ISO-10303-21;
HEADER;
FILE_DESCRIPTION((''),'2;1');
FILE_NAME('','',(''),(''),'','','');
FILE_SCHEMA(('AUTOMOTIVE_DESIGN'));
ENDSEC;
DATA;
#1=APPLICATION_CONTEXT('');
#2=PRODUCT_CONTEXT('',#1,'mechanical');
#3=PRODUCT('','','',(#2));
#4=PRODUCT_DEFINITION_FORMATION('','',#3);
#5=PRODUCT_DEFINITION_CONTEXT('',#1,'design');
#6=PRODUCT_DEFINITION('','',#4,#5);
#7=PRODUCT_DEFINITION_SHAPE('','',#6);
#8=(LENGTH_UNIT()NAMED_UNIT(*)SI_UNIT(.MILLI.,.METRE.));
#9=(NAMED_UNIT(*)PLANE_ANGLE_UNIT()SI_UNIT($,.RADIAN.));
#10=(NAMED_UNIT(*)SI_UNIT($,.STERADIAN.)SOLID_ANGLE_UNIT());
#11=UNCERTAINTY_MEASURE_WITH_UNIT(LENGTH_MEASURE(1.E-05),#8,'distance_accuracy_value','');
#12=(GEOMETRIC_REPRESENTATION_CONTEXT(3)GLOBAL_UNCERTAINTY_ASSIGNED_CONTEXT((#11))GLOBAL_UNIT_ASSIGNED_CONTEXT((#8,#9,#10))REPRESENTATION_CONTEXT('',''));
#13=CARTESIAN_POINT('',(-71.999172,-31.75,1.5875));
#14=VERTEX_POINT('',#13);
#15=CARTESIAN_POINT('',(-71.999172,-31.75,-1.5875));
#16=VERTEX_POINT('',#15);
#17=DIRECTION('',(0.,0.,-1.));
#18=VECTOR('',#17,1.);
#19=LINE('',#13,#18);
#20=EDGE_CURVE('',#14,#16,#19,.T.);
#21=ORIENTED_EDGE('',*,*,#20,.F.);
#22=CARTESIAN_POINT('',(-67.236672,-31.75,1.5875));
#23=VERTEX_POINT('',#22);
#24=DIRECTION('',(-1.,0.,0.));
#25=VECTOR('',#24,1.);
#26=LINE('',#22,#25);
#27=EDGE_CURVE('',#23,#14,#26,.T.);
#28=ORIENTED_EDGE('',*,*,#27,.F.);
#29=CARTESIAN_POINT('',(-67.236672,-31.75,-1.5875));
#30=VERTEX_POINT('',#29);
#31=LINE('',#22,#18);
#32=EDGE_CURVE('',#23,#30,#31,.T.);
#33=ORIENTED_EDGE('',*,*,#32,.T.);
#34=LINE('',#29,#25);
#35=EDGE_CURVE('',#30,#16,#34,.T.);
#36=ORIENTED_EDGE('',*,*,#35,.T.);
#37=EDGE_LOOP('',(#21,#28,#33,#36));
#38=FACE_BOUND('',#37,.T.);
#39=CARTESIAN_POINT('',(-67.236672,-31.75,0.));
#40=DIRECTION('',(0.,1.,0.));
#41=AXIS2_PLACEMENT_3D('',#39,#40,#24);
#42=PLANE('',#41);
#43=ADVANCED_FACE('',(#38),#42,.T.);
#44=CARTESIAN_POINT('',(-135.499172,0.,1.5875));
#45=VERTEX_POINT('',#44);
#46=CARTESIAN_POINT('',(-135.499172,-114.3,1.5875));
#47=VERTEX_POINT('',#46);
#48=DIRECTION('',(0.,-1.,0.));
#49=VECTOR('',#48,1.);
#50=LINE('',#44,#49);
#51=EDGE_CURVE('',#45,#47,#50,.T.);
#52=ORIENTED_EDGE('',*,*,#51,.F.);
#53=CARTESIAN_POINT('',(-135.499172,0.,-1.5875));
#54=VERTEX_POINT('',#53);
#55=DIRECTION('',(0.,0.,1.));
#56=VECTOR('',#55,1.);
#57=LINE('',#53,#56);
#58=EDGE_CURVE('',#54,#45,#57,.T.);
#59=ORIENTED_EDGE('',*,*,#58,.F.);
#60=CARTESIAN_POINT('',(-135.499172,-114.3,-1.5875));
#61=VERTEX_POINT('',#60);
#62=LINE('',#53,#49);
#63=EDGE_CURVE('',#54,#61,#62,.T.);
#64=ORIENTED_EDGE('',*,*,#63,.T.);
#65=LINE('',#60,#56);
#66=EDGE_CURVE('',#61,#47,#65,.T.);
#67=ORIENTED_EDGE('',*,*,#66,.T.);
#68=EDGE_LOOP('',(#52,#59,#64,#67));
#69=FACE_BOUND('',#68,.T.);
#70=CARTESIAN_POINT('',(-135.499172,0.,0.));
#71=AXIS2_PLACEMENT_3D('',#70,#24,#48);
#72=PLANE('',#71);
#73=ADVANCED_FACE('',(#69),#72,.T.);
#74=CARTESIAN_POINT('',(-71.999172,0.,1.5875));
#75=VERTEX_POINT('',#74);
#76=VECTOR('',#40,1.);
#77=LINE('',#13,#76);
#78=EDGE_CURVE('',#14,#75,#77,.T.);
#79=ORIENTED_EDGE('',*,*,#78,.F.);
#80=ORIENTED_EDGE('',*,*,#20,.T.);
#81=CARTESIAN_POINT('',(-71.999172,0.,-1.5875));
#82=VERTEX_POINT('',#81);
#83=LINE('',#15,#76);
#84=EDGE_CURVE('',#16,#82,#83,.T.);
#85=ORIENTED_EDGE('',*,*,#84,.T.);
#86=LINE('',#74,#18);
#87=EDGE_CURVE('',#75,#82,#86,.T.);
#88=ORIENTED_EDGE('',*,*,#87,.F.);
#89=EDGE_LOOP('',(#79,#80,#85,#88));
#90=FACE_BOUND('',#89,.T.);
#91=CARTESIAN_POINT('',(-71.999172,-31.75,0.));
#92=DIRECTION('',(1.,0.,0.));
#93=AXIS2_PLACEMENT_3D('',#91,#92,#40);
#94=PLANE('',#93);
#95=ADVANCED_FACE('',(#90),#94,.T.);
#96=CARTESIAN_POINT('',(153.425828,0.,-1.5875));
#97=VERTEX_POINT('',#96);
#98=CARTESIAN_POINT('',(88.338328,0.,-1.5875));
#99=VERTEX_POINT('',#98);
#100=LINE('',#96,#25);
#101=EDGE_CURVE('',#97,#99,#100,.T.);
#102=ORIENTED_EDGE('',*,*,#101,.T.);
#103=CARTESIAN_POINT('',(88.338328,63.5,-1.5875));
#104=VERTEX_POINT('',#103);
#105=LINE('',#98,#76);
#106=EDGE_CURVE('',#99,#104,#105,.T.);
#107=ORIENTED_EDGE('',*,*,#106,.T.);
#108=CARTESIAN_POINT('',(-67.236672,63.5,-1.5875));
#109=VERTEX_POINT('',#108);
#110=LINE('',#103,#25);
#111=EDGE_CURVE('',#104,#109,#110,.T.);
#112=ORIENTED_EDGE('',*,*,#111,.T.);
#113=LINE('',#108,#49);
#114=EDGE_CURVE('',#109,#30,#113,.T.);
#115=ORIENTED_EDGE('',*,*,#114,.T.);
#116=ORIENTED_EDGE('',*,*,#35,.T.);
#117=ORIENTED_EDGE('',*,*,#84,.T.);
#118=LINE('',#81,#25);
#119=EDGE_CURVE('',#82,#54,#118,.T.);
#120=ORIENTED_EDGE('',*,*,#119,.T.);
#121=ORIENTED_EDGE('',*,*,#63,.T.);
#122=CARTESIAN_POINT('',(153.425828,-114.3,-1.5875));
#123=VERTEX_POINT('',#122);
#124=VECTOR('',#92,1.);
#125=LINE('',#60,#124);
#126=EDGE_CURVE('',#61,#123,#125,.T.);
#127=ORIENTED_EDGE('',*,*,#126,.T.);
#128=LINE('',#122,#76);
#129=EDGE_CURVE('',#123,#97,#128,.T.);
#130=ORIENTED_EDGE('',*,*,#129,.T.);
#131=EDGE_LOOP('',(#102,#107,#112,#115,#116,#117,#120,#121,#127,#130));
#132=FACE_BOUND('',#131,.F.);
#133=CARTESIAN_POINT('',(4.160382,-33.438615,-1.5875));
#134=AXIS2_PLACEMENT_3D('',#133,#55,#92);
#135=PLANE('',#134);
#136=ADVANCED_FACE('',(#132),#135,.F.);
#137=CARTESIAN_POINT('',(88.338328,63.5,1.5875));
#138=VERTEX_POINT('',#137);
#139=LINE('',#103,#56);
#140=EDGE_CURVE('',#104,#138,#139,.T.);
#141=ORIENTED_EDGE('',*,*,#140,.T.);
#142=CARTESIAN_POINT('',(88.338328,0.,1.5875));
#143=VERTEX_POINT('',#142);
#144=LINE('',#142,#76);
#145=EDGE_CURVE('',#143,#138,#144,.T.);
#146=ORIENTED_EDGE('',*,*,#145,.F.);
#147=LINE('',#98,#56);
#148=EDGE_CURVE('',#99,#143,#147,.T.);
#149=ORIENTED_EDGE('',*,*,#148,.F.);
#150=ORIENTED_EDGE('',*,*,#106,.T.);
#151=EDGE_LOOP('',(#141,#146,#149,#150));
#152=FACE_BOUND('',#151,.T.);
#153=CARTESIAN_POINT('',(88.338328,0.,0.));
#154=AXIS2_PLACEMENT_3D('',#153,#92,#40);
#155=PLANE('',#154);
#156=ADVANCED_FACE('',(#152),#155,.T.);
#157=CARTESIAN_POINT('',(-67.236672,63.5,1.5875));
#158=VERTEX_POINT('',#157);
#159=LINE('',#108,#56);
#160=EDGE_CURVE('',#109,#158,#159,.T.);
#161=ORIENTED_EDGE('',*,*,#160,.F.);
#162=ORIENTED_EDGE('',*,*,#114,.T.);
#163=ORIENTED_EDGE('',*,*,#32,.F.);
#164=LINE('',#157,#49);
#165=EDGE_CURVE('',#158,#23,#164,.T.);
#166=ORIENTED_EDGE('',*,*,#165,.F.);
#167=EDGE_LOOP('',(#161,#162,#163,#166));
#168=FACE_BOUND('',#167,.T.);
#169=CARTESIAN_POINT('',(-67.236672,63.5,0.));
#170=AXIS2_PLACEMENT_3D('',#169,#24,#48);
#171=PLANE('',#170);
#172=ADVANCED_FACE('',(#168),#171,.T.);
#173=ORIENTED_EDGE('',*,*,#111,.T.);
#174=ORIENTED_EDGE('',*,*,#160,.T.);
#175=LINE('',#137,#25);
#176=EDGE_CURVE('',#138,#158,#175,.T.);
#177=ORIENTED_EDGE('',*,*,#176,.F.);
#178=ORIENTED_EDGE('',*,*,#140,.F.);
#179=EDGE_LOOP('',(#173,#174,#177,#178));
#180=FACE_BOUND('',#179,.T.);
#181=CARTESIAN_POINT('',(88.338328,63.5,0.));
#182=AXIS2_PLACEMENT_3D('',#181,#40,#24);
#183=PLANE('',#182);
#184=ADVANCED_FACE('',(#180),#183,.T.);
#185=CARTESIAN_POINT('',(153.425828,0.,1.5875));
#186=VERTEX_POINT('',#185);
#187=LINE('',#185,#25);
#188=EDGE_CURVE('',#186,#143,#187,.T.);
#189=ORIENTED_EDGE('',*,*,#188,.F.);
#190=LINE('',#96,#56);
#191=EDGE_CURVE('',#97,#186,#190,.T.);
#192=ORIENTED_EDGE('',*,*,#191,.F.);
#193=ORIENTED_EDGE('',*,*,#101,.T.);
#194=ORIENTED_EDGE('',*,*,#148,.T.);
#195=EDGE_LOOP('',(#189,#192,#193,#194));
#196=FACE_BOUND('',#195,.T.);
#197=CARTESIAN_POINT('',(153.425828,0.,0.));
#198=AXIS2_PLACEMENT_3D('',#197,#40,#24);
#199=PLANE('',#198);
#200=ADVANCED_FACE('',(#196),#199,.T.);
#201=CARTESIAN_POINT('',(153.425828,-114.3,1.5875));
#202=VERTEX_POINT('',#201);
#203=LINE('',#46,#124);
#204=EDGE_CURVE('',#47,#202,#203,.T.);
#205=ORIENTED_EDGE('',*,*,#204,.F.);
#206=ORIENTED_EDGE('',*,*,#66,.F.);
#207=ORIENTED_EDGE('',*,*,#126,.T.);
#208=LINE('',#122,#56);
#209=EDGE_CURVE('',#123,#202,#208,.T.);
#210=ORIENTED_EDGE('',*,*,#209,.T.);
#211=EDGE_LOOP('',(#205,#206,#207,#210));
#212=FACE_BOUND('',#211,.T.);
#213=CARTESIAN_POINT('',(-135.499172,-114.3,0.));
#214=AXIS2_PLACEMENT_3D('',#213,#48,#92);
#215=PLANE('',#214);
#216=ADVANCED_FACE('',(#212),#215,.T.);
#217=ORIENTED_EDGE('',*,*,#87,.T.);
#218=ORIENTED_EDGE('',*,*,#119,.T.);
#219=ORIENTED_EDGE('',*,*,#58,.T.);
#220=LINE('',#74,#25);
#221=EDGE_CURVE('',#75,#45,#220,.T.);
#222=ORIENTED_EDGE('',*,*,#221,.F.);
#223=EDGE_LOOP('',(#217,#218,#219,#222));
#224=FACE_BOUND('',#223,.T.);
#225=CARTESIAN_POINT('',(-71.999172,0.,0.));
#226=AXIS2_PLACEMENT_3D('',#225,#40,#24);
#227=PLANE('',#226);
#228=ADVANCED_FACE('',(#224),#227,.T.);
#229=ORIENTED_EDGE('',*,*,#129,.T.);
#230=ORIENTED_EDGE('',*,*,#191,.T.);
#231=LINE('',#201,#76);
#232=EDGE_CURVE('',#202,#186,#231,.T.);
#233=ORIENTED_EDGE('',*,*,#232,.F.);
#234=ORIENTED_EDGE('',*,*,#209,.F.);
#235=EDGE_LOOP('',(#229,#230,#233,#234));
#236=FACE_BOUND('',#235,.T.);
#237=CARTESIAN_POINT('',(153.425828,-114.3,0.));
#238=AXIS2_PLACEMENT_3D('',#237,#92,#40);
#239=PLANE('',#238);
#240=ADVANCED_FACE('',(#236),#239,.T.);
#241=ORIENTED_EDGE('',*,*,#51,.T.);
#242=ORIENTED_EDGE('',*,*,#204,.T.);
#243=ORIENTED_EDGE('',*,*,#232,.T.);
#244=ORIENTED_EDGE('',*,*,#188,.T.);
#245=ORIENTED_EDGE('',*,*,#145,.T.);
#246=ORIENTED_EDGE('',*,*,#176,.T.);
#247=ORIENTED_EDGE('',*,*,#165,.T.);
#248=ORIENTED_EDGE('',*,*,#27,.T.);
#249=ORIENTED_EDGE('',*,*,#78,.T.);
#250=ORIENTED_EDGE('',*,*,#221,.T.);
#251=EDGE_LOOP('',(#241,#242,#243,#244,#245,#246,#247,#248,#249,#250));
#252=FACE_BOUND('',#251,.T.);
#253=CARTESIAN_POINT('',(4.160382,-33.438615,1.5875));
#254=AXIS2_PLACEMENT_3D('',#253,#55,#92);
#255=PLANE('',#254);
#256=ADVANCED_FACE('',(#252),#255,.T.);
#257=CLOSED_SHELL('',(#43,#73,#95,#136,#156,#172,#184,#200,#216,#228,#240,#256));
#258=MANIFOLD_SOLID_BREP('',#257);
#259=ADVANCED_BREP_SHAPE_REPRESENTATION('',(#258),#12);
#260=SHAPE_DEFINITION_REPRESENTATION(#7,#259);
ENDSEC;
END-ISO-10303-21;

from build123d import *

# Parameters (mm, degrees)
F1_DEPTH = 1.5875


# Not quite as in the source:
# - a length typed as a fraction of an inch, garbled in the dataset ("3 / 203.2 mm" for 3/8 in), is restored


with BuildPart() as f1:
    # F0 (on Top) → F1 (new body, symmetric)
    with BuildSketch(Plane.XY):
        Polygon((-71.9991720523, 0), (-135.4991720523, 0), (-135.4991720523, -114.3), (153.4258279477, -114.3), (153.4258279477, 0), (88.3383279477, 0), (88.3383279477, 63.5), (-67.2366720523, 63.5), (-67.2366720523, -31.75), (-71.9991720523, -31.75), align=None)
    extrude(amount=F1_DEPTH, both=True)


solid = f1.part
